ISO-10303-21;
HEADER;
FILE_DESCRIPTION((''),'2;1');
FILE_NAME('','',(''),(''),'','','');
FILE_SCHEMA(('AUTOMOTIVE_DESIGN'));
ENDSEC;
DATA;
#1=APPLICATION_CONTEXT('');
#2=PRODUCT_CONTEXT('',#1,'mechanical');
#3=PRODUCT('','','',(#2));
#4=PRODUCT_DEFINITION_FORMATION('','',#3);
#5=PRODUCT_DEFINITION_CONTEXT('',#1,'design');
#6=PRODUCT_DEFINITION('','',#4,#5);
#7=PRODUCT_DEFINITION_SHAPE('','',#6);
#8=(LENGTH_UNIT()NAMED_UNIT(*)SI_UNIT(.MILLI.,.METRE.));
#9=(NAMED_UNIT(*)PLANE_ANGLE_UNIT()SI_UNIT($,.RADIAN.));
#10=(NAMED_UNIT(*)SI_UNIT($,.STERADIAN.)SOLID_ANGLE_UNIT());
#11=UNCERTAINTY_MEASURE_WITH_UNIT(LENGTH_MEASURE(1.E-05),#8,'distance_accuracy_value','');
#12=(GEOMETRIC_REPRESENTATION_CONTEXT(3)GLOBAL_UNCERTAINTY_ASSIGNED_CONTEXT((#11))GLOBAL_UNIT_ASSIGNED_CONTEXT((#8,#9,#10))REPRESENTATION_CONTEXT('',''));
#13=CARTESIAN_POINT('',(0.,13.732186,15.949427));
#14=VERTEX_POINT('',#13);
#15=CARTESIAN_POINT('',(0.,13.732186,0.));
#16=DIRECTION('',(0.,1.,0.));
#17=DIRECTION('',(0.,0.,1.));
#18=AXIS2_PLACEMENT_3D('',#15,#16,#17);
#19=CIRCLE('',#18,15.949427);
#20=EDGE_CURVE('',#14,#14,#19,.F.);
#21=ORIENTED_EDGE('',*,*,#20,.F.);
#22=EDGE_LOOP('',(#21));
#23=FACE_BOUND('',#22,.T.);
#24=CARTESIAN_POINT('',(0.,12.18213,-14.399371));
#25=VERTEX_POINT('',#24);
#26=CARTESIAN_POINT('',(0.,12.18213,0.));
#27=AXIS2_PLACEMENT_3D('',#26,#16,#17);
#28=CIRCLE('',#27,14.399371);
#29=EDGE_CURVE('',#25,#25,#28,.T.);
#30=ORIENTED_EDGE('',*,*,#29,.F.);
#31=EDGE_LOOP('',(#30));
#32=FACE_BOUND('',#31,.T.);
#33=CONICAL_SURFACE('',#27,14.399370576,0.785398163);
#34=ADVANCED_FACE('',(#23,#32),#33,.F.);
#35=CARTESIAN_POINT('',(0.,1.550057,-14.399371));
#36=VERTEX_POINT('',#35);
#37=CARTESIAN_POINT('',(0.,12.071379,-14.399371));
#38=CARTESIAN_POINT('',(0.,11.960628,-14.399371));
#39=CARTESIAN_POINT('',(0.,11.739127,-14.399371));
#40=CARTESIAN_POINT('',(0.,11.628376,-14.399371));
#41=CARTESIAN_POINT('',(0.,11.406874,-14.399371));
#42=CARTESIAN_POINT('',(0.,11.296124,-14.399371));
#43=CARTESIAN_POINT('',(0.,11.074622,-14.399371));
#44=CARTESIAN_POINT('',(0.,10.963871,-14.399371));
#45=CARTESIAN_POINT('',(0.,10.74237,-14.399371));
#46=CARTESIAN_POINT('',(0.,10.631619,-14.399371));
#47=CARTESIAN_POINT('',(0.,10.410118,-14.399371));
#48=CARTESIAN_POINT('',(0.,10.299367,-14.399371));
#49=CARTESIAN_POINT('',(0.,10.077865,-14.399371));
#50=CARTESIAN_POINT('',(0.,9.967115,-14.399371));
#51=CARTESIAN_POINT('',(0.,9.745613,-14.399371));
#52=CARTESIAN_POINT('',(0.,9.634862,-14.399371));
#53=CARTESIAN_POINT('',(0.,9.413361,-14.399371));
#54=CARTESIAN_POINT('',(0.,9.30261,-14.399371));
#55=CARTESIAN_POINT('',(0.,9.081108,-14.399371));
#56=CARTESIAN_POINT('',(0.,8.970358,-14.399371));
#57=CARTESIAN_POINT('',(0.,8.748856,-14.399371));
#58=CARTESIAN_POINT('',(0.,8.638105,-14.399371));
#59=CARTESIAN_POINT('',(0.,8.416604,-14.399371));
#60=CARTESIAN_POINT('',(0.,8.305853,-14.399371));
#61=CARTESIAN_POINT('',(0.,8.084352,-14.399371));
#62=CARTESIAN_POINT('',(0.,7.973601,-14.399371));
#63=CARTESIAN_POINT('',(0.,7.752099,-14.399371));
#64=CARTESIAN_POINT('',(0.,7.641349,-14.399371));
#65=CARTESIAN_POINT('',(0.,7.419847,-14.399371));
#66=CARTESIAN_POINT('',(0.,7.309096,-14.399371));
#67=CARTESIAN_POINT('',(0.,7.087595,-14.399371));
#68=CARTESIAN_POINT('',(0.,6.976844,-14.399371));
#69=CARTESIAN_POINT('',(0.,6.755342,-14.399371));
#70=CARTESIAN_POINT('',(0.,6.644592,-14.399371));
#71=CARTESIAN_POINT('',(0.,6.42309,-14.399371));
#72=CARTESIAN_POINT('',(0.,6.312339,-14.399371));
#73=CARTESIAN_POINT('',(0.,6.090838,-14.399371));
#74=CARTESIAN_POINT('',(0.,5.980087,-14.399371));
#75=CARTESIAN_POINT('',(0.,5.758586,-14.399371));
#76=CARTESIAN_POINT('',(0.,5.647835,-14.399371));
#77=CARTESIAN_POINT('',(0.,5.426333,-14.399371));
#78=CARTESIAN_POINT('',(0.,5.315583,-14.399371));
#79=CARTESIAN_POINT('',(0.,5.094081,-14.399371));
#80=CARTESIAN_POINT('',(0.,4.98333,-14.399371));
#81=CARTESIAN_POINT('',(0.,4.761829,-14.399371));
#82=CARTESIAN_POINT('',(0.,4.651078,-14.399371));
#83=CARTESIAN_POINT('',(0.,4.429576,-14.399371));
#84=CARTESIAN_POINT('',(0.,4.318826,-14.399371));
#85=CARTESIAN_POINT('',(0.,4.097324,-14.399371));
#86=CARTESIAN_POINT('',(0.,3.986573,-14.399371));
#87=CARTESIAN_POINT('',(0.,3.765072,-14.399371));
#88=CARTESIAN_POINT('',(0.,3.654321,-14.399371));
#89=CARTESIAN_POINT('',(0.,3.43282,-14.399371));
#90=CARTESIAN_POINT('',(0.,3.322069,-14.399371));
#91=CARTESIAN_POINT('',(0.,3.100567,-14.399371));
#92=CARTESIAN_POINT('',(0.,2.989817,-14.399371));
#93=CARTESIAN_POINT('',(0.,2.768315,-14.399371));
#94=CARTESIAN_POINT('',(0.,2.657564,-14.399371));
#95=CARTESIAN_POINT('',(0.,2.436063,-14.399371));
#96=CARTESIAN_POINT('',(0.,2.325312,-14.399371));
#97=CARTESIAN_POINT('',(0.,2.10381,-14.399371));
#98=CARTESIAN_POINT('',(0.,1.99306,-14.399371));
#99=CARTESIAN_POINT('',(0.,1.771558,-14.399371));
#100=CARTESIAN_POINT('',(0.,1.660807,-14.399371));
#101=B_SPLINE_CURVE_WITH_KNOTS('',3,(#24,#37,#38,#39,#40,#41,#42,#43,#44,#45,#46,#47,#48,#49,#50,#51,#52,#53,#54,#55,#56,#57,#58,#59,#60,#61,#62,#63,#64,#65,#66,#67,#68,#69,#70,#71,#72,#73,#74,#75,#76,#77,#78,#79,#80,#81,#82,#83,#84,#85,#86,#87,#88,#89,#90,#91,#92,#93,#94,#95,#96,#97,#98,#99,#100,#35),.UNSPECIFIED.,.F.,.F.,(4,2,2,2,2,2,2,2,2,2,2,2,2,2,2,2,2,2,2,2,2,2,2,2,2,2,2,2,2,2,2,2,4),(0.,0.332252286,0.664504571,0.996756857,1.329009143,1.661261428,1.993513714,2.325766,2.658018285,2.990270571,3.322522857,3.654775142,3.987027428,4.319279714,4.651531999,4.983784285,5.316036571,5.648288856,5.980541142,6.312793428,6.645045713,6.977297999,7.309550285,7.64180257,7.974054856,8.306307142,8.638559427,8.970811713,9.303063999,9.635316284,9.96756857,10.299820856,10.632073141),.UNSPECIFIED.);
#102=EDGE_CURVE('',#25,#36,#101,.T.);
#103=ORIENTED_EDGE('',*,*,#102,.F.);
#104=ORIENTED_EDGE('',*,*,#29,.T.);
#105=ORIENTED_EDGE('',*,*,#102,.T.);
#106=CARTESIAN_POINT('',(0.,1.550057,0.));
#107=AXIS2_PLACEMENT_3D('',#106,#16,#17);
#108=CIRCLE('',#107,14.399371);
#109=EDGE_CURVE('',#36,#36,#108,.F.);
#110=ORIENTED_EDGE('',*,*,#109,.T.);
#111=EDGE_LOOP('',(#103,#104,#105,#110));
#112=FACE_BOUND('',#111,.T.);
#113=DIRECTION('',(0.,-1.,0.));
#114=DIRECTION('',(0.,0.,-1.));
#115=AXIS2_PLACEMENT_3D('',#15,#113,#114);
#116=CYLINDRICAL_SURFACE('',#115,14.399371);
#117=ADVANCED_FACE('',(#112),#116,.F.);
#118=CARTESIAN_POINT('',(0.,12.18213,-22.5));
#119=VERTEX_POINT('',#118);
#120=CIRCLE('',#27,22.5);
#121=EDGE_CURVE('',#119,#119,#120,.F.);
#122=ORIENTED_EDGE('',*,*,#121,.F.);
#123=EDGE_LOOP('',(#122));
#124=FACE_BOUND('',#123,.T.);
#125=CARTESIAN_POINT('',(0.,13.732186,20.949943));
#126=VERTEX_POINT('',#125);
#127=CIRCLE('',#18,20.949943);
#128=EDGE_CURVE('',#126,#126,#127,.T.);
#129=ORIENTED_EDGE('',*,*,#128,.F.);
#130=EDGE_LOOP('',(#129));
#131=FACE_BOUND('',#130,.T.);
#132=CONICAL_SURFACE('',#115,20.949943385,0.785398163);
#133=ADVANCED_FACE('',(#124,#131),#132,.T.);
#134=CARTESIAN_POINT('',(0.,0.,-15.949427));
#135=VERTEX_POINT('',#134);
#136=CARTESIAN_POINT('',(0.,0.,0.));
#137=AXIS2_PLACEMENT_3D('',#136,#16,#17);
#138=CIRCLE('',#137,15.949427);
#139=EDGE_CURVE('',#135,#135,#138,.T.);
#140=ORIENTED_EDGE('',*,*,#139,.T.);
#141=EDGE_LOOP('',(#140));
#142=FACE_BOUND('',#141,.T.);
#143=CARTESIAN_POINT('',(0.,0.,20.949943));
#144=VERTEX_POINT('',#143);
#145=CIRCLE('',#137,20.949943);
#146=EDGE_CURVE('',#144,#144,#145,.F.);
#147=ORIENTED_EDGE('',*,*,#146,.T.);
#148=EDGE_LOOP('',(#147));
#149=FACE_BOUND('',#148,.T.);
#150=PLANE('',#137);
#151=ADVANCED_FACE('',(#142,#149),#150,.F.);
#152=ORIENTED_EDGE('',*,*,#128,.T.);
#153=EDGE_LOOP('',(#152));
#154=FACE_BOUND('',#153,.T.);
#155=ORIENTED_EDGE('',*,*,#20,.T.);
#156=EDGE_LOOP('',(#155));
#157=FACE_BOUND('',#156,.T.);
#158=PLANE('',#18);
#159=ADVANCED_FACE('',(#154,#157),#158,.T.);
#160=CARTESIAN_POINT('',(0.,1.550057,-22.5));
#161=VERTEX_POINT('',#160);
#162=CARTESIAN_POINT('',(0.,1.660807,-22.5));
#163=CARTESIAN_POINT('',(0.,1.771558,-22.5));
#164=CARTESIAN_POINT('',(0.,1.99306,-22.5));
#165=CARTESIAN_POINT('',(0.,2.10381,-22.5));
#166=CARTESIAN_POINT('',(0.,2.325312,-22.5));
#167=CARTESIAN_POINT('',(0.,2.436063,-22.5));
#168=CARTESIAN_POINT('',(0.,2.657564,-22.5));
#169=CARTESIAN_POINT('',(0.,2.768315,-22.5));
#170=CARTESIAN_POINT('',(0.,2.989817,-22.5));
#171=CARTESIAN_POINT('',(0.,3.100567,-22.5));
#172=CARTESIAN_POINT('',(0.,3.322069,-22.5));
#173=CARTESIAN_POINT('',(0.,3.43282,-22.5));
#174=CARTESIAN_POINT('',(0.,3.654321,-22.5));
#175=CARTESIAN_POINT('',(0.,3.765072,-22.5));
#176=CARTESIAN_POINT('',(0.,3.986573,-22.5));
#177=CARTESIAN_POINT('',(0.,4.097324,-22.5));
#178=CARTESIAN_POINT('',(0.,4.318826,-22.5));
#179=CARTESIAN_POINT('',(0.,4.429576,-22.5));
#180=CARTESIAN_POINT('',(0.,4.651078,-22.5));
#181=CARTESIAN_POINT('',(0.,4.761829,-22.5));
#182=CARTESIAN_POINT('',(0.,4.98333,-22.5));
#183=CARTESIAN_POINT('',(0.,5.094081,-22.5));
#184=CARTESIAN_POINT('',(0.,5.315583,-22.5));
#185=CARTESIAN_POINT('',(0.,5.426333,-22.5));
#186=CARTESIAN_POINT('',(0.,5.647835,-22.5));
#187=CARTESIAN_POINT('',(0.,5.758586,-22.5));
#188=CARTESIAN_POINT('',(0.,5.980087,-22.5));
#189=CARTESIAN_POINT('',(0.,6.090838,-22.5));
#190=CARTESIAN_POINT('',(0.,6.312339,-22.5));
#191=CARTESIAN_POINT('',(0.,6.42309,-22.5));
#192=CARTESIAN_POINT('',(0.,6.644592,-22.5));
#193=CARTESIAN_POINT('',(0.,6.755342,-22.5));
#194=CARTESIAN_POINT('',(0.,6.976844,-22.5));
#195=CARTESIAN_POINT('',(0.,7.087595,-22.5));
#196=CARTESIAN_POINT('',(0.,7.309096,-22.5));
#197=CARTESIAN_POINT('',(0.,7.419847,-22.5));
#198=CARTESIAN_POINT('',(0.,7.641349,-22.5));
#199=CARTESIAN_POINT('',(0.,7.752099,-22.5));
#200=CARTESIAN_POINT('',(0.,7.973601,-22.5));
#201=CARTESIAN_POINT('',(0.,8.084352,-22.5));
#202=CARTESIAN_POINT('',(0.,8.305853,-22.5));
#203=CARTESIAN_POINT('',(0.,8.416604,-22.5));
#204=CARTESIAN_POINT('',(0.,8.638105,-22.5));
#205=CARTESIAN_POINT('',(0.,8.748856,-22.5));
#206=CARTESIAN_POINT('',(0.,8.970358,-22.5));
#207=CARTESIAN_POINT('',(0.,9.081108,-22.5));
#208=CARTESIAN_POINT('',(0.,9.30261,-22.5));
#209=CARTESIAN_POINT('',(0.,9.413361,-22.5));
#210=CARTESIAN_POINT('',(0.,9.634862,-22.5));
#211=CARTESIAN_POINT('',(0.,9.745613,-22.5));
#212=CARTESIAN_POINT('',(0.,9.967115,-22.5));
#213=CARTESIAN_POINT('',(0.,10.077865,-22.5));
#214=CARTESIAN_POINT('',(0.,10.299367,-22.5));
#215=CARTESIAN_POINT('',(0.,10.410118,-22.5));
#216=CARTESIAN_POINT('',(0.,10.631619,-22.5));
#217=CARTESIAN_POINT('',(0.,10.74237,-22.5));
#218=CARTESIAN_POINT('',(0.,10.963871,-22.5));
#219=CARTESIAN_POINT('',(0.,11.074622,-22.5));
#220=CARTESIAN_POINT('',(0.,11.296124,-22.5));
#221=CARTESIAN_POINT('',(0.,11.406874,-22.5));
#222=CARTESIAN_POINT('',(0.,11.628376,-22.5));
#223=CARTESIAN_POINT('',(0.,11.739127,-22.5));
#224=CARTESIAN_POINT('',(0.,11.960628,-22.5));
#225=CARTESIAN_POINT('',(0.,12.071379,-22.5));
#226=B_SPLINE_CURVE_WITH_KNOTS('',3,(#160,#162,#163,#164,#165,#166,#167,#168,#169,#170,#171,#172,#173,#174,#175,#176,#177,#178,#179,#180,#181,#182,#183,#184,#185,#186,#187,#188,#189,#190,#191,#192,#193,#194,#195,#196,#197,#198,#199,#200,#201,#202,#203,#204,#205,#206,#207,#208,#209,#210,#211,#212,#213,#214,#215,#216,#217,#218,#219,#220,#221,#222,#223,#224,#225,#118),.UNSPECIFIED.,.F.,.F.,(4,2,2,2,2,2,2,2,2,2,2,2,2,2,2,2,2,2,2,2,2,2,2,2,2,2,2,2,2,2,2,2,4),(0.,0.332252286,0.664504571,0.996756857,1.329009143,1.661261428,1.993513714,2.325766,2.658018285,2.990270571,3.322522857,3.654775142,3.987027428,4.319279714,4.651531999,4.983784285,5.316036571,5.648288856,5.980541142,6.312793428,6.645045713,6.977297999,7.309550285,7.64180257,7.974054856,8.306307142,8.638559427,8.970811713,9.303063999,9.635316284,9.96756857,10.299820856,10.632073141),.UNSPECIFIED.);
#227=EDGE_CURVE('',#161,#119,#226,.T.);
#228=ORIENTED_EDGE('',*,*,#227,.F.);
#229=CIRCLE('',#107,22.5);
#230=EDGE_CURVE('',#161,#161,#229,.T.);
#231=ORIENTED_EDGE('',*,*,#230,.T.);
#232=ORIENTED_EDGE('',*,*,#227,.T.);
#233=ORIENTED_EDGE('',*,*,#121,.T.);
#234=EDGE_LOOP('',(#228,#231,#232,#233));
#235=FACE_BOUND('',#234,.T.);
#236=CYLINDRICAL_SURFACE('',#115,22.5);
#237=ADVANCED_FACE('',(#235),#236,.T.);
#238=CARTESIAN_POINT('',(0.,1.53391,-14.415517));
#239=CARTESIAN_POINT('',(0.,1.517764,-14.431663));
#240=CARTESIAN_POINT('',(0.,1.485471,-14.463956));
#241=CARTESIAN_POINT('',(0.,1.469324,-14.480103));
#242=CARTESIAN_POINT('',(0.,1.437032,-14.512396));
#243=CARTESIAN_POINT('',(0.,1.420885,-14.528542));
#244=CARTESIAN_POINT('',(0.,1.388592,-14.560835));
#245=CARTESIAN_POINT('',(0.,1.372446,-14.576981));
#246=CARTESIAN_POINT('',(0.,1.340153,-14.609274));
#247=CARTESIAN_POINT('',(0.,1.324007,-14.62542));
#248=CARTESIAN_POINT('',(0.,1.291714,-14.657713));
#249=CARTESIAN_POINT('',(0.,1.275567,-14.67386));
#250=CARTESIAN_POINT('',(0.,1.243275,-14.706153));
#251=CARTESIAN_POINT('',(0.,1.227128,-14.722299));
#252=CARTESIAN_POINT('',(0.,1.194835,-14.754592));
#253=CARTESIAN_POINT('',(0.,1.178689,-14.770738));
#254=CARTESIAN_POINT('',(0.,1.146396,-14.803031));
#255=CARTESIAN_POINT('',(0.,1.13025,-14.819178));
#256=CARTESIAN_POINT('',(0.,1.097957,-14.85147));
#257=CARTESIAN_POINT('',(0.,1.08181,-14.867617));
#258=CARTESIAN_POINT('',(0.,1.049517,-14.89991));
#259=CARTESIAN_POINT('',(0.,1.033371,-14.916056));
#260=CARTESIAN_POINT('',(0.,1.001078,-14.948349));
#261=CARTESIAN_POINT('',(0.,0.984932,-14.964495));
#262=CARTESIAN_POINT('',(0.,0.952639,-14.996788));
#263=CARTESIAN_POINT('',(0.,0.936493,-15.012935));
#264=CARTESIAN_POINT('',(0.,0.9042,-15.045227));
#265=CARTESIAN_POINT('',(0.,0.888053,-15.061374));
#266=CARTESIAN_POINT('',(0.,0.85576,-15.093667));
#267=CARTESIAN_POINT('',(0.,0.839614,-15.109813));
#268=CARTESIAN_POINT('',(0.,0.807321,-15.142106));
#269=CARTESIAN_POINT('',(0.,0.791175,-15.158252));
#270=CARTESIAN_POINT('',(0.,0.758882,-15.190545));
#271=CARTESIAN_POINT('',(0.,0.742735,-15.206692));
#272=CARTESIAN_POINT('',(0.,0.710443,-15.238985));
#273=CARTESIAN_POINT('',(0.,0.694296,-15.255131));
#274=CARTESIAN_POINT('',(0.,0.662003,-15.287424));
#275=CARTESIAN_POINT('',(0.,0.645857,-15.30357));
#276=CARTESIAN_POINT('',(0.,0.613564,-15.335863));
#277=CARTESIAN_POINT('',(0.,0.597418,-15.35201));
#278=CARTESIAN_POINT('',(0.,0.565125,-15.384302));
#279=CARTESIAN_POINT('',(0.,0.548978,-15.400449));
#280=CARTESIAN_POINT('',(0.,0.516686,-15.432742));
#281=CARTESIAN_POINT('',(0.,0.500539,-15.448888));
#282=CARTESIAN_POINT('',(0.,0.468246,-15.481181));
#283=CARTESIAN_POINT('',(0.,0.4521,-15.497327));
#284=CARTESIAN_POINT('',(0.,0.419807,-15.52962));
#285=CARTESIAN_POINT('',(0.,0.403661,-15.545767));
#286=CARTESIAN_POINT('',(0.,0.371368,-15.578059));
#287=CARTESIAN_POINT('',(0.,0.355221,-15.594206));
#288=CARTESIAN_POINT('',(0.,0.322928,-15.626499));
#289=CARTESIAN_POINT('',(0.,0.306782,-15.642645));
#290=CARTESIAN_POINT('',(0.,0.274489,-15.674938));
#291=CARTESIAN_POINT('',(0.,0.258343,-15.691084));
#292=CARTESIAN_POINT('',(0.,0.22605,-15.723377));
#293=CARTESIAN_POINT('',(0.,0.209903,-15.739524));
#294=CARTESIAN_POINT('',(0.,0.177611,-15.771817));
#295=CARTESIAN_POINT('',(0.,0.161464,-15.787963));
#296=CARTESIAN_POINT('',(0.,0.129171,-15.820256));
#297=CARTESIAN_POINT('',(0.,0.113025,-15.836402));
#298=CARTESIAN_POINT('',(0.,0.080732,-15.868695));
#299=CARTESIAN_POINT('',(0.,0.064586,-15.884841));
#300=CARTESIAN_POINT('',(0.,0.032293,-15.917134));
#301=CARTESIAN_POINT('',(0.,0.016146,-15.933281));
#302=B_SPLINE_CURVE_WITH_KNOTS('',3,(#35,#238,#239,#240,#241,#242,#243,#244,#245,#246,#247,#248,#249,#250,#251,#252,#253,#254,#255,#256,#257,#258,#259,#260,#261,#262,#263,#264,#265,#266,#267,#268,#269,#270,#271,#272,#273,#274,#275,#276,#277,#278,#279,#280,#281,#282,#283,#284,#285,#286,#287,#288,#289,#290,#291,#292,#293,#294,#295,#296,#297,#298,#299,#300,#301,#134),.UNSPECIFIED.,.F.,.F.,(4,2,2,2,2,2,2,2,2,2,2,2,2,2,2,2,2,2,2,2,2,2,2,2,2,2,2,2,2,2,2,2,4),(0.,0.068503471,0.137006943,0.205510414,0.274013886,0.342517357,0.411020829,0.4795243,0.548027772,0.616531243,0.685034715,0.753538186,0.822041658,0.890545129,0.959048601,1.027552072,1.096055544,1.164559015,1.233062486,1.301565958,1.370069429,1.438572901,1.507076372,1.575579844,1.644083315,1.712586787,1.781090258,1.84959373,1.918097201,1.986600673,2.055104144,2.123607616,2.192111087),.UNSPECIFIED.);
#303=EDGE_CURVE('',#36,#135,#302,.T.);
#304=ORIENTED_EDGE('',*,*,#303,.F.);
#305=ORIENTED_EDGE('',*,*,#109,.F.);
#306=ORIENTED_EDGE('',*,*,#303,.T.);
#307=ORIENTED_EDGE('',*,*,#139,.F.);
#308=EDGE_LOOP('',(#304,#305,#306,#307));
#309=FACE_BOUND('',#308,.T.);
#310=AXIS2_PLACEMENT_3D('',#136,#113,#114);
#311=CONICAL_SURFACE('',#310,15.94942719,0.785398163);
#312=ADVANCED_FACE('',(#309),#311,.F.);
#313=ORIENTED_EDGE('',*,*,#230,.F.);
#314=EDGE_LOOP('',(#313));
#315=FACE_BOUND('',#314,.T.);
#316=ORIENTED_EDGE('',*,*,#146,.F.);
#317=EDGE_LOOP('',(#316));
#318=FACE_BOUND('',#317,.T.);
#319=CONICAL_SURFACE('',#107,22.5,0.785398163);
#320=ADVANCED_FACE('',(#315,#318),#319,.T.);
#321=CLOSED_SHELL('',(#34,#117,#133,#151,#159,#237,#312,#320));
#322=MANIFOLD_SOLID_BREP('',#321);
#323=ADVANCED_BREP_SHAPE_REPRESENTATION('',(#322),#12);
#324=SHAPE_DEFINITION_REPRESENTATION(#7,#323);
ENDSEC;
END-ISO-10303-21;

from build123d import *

# Parameters (mm, degrees)
SKETCH1_R           = 22.5
BOSS_EXTRUDE1_DEPTH = 13.732186371
SKETCH2_R           = 14.399370576
CUT_EXTRUDE1_DEPTH  = 35.656499283
CHAMFER1_SIZE       = 1.550056615


with BuildPart() as part:
    # Sketch1 → Boss-Extrude1 (new body)
    with BuildSketch(Plane(origin=(0, 0, 0), x_dir=(1, 0, 0), z_dir=(0, 1, 0))):
        Circle(SKETCH1_R)
    extrude(amount=BOSS_EXTRUDE1_DEPTH)

    # Sketch2 → Cut-Extrude1 (cut, through all)
    with BuildSketch(Plane(origin=(0, 0, 0), x_dir=(1, 0, 0), z_dir=(0, 1, 0))):
        Circle(SKETCH2_R)
    extrude(amount=CUT_EXTRUDE1_DEPTH, mode=Mode.SUBTRACT)

    # Chamfer1
    chamfer1_edges = [part.edges().sort_by_distance(p)[0] for p in [
        (-14.399370576, 13.732186371, 0),
        (-14.399370576, 0, 0),
        (-22.5, 0, 0),
        (-22.5, 13.732186371, 0),
    ]]
    chamfer(chamfer1_edges, length=CHAMFER1_SIZE)


solid = part.part
